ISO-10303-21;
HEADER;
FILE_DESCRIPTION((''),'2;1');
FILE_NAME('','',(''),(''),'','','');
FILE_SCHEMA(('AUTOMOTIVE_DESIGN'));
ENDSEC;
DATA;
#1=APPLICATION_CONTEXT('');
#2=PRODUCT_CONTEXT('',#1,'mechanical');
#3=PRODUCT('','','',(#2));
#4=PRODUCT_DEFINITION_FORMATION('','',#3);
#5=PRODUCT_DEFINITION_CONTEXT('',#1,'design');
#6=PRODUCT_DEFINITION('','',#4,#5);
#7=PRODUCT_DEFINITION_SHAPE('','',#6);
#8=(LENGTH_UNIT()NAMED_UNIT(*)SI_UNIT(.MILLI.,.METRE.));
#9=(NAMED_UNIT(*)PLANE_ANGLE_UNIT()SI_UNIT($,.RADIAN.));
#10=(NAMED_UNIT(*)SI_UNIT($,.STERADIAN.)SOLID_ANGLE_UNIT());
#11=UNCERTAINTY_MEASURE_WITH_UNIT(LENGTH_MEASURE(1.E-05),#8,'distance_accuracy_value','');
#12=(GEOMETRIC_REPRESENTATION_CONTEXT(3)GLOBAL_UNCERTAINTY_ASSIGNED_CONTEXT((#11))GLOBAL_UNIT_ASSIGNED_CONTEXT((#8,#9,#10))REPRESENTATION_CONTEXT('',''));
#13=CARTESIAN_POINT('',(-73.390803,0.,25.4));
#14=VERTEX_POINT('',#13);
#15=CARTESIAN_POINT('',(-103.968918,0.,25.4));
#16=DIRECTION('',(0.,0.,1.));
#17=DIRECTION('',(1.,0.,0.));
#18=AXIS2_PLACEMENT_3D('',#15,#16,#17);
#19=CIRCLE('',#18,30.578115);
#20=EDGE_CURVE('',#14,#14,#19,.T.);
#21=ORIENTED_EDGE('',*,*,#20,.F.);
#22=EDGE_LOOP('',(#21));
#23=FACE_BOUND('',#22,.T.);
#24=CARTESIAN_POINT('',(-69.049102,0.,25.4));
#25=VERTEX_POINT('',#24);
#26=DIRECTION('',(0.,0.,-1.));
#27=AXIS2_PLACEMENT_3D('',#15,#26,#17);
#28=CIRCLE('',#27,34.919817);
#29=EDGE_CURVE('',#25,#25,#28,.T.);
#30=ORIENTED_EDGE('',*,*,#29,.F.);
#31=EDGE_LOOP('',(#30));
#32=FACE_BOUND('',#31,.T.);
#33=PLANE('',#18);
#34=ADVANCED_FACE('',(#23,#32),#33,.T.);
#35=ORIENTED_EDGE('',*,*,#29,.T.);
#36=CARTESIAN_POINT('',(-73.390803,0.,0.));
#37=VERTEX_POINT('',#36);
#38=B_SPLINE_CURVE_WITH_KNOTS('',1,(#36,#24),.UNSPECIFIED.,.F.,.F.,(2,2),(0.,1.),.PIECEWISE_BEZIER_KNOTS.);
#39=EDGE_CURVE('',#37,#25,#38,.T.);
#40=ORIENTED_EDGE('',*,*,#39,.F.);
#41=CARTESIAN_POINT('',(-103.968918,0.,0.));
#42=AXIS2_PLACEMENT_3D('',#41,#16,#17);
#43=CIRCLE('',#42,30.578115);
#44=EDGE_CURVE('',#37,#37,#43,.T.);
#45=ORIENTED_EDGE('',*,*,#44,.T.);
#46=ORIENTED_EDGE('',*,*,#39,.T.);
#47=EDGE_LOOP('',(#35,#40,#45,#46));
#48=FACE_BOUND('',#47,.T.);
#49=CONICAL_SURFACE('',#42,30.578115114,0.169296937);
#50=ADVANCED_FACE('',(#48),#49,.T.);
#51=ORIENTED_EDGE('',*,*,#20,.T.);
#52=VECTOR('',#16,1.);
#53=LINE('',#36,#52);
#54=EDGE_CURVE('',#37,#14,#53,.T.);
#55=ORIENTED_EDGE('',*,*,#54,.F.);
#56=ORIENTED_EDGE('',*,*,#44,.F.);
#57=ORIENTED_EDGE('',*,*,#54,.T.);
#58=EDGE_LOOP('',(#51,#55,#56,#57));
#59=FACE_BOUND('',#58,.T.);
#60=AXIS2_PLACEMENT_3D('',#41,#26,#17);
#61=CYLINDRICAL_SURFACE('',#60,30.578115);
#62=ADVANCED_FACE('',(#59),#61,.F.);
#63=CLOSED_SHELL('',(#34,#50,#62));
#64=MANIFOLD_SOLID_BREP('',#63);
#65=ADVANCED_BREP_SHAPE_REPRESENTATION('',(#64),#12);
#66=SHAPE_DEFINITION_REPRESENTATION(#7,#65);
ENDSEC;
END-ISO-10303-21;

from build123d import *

# Parameters (mm, degrees)
F0_R     = 30.578115114
F1_DEPTH = 25.4
F1_TAPER = -9.7
F3_DEPTH = 25.4


# Not quite as in the source:
# - a feature of the source that left no trace in its solid (it failed there, or was rolled back) is left out


with BuildPart() as f1:
    # F0 (on Top) → F1 (new body)
    with BuildSketch(Plane.XY):
        with Locations((-103.9689183235, 0)):
            Circle(F0_R)
    extrude(amount=F1_DEPTH, taper=F1_TAPER)

    # F0 (on Top) → F3 (cut)
    with BuildSketch(Plane.XY):
        with Locations((-103.9689183235, 0)):
            Circle(F0_R)
    extrude(amount=F3_DEPTH, mode=Mode.SUBTRACT)


solid = f1.part
